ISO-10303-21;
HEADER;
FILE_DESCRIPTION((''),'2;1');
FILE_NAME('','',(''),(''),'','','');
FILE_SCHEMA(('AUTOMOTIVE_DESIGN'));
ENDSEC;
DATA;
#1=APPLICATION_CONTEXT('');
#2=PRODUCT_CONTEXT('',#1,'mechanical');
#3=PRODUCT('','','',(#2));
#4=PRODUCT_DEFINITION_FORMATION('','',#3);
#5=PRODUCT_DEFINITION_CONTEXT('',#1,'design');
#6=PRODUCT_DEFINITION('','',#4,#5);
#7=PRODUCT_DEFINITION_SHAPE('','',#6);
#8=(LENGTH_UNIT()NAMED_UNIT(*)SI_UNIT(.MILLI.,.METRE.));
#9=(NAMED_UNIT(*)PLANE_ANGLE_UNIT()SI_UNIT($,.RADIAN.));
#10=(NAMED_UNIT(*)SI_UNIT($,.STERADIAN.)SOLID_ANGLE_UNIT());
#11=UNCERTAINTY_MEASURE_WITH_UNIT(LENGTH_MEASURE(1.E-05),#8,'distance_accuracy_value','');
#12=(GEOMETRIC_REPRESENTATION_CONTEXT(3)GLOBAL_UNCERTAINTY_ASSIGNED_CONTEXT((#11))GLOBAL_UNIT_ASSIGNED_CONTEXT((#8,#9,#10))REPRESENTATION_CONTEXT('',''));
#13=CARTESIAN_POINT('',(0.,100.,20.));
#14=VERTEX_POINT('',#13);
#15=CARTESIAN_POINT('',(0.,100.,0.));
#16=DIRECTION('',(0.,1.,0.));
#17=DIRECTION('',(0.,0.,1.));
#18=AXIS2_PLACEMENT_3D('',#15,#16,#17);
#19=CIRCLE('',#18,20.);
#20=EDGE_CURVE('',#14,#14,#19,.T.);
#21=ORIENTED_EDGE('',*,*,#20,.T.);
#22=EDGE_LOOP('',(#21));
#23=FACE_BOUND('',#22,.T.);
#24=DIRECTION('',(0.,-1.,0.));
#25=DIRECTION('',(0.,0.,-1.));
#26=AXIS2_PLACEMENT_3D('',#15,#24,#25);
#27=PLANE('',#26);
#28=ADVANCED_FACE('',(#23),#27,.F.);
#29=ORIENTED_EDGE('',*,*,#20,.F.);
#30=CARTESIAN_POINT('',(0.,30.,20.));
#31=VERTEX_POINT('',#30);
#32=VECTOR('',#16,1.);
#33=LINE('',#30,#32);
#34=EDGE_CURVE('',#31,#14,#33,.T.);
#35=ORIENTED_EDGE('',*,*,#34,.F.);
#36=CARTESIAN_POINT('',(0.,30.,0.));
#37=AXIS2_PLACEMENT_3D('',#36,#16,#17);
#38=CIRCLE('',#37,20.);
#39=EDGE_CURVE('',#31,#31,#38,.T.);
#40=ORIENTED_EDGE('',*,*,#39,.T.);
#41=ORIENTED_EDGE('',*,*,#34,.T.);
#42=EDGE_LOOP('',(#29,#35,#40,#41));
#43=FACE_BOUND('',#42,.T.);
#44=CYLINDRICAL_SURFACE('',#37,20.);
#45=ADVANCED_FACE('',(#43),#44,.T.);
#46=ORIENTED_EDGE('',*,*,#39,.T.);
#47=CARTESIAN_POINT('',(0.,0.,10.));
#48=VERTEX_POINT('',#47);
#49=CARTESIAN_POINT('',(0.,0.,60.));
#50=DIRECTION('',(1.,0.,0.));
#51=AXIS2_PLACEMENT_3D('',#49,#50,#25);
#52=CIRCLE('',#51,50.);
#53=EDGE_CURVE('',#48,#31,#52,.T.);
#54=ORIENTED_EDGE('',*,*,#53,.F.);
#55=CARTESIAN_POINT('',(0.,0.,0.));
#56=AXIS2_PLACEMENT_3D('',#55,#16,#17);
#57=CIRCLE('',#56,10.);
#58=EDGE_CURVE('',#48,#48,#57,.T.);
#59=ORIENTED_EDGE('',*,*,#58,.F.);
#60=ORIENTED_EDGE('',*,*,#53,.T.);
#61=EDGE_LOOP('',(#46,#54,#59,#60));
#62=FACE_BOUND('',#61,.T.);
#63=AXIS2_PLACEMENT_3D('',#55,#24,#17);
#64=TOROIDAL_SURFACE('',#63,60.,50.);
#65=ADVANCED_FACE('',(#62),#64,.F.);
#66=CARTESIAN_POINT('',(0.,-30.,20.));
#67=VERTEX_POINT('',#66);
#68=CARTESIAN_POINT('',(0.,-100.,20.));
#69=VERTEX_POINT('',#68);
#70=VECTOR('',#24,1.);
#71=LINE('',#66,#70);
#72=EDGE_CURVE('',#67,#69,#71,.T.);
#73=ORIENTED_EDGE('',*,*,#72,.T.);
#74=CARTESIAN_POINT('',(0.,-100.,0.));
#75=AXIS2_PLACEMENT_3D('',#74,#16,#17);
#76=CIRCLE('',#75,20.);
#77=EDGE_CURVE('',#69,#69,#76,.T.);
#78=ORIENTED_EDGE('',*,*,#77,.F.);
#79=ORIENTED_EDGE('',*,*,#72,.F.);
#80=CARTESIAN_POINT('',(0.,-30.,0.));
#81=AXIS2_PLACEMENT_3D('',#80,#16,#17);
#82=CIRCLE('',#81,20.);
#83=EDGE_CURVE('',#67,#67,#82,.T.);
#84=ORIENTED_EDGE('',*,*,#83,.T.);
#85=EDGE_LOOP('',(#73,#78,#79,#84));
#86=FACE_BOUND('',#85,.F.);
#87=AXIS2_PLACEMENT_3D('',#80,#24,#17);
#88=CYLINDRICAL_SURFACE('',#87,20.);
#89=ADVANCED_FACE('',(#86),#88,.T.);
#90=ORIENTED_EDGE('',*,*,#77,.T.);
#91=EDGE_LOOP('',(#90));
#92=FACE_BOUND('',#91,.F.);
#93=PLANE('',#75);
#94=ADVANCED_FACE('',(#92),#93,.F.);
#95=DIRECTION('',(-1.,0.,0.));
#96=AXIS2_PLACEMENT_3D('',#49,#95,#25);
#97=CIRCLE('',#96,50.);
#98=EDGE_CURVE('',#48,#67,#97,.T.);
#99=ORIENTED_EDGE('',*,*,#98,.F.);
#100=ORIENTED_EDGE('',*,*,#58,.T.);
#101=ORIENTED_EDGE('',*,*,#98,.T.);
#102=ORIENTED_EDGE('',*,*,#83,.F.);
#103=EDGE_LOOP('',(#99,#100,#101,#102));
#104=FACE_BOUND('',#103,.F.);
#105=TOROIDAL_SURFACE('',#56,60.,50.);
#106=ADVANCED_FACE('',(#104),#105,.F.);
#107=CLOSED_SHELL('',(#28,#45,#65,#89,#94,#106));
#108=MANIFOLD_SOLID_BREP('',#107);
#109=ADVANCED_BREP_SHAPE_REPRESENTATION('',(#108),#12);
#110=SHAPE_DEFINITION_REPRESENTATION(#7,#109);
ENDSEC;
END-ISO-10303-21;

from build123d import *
from build123d import SkipClean  # not in build123d's __all__


with BuildPart() as f1:
    # F0 (on Right) → F1 (revolve)
    with BuildSketch(Plane.YZ):
        with BuildLine():
            Line((-30, 20), (-100, 20))
            Line((-100, 20), (-100, 0))
            Line((-100, 0), (0, 0))
            Line((0, 0), (0, 10))
            ThreePointArc((0, 10), (-15.8113883008, 12.5658350975), (-30, 20))
        make_face()
    revolve(axis=Axis((0, -50, 0), (0, 1, 0)))

    # F2: F1 across plane


with BuildPart() as f1_1:
    add(f1.part, clean=False)
    with SkipClean():  # cleaning this boolean's faces spoils the solid; the shape is the same uncleaned
        add(f1.part.mirror(Plane.XZ), clean=False)


solid = f1_1.part
